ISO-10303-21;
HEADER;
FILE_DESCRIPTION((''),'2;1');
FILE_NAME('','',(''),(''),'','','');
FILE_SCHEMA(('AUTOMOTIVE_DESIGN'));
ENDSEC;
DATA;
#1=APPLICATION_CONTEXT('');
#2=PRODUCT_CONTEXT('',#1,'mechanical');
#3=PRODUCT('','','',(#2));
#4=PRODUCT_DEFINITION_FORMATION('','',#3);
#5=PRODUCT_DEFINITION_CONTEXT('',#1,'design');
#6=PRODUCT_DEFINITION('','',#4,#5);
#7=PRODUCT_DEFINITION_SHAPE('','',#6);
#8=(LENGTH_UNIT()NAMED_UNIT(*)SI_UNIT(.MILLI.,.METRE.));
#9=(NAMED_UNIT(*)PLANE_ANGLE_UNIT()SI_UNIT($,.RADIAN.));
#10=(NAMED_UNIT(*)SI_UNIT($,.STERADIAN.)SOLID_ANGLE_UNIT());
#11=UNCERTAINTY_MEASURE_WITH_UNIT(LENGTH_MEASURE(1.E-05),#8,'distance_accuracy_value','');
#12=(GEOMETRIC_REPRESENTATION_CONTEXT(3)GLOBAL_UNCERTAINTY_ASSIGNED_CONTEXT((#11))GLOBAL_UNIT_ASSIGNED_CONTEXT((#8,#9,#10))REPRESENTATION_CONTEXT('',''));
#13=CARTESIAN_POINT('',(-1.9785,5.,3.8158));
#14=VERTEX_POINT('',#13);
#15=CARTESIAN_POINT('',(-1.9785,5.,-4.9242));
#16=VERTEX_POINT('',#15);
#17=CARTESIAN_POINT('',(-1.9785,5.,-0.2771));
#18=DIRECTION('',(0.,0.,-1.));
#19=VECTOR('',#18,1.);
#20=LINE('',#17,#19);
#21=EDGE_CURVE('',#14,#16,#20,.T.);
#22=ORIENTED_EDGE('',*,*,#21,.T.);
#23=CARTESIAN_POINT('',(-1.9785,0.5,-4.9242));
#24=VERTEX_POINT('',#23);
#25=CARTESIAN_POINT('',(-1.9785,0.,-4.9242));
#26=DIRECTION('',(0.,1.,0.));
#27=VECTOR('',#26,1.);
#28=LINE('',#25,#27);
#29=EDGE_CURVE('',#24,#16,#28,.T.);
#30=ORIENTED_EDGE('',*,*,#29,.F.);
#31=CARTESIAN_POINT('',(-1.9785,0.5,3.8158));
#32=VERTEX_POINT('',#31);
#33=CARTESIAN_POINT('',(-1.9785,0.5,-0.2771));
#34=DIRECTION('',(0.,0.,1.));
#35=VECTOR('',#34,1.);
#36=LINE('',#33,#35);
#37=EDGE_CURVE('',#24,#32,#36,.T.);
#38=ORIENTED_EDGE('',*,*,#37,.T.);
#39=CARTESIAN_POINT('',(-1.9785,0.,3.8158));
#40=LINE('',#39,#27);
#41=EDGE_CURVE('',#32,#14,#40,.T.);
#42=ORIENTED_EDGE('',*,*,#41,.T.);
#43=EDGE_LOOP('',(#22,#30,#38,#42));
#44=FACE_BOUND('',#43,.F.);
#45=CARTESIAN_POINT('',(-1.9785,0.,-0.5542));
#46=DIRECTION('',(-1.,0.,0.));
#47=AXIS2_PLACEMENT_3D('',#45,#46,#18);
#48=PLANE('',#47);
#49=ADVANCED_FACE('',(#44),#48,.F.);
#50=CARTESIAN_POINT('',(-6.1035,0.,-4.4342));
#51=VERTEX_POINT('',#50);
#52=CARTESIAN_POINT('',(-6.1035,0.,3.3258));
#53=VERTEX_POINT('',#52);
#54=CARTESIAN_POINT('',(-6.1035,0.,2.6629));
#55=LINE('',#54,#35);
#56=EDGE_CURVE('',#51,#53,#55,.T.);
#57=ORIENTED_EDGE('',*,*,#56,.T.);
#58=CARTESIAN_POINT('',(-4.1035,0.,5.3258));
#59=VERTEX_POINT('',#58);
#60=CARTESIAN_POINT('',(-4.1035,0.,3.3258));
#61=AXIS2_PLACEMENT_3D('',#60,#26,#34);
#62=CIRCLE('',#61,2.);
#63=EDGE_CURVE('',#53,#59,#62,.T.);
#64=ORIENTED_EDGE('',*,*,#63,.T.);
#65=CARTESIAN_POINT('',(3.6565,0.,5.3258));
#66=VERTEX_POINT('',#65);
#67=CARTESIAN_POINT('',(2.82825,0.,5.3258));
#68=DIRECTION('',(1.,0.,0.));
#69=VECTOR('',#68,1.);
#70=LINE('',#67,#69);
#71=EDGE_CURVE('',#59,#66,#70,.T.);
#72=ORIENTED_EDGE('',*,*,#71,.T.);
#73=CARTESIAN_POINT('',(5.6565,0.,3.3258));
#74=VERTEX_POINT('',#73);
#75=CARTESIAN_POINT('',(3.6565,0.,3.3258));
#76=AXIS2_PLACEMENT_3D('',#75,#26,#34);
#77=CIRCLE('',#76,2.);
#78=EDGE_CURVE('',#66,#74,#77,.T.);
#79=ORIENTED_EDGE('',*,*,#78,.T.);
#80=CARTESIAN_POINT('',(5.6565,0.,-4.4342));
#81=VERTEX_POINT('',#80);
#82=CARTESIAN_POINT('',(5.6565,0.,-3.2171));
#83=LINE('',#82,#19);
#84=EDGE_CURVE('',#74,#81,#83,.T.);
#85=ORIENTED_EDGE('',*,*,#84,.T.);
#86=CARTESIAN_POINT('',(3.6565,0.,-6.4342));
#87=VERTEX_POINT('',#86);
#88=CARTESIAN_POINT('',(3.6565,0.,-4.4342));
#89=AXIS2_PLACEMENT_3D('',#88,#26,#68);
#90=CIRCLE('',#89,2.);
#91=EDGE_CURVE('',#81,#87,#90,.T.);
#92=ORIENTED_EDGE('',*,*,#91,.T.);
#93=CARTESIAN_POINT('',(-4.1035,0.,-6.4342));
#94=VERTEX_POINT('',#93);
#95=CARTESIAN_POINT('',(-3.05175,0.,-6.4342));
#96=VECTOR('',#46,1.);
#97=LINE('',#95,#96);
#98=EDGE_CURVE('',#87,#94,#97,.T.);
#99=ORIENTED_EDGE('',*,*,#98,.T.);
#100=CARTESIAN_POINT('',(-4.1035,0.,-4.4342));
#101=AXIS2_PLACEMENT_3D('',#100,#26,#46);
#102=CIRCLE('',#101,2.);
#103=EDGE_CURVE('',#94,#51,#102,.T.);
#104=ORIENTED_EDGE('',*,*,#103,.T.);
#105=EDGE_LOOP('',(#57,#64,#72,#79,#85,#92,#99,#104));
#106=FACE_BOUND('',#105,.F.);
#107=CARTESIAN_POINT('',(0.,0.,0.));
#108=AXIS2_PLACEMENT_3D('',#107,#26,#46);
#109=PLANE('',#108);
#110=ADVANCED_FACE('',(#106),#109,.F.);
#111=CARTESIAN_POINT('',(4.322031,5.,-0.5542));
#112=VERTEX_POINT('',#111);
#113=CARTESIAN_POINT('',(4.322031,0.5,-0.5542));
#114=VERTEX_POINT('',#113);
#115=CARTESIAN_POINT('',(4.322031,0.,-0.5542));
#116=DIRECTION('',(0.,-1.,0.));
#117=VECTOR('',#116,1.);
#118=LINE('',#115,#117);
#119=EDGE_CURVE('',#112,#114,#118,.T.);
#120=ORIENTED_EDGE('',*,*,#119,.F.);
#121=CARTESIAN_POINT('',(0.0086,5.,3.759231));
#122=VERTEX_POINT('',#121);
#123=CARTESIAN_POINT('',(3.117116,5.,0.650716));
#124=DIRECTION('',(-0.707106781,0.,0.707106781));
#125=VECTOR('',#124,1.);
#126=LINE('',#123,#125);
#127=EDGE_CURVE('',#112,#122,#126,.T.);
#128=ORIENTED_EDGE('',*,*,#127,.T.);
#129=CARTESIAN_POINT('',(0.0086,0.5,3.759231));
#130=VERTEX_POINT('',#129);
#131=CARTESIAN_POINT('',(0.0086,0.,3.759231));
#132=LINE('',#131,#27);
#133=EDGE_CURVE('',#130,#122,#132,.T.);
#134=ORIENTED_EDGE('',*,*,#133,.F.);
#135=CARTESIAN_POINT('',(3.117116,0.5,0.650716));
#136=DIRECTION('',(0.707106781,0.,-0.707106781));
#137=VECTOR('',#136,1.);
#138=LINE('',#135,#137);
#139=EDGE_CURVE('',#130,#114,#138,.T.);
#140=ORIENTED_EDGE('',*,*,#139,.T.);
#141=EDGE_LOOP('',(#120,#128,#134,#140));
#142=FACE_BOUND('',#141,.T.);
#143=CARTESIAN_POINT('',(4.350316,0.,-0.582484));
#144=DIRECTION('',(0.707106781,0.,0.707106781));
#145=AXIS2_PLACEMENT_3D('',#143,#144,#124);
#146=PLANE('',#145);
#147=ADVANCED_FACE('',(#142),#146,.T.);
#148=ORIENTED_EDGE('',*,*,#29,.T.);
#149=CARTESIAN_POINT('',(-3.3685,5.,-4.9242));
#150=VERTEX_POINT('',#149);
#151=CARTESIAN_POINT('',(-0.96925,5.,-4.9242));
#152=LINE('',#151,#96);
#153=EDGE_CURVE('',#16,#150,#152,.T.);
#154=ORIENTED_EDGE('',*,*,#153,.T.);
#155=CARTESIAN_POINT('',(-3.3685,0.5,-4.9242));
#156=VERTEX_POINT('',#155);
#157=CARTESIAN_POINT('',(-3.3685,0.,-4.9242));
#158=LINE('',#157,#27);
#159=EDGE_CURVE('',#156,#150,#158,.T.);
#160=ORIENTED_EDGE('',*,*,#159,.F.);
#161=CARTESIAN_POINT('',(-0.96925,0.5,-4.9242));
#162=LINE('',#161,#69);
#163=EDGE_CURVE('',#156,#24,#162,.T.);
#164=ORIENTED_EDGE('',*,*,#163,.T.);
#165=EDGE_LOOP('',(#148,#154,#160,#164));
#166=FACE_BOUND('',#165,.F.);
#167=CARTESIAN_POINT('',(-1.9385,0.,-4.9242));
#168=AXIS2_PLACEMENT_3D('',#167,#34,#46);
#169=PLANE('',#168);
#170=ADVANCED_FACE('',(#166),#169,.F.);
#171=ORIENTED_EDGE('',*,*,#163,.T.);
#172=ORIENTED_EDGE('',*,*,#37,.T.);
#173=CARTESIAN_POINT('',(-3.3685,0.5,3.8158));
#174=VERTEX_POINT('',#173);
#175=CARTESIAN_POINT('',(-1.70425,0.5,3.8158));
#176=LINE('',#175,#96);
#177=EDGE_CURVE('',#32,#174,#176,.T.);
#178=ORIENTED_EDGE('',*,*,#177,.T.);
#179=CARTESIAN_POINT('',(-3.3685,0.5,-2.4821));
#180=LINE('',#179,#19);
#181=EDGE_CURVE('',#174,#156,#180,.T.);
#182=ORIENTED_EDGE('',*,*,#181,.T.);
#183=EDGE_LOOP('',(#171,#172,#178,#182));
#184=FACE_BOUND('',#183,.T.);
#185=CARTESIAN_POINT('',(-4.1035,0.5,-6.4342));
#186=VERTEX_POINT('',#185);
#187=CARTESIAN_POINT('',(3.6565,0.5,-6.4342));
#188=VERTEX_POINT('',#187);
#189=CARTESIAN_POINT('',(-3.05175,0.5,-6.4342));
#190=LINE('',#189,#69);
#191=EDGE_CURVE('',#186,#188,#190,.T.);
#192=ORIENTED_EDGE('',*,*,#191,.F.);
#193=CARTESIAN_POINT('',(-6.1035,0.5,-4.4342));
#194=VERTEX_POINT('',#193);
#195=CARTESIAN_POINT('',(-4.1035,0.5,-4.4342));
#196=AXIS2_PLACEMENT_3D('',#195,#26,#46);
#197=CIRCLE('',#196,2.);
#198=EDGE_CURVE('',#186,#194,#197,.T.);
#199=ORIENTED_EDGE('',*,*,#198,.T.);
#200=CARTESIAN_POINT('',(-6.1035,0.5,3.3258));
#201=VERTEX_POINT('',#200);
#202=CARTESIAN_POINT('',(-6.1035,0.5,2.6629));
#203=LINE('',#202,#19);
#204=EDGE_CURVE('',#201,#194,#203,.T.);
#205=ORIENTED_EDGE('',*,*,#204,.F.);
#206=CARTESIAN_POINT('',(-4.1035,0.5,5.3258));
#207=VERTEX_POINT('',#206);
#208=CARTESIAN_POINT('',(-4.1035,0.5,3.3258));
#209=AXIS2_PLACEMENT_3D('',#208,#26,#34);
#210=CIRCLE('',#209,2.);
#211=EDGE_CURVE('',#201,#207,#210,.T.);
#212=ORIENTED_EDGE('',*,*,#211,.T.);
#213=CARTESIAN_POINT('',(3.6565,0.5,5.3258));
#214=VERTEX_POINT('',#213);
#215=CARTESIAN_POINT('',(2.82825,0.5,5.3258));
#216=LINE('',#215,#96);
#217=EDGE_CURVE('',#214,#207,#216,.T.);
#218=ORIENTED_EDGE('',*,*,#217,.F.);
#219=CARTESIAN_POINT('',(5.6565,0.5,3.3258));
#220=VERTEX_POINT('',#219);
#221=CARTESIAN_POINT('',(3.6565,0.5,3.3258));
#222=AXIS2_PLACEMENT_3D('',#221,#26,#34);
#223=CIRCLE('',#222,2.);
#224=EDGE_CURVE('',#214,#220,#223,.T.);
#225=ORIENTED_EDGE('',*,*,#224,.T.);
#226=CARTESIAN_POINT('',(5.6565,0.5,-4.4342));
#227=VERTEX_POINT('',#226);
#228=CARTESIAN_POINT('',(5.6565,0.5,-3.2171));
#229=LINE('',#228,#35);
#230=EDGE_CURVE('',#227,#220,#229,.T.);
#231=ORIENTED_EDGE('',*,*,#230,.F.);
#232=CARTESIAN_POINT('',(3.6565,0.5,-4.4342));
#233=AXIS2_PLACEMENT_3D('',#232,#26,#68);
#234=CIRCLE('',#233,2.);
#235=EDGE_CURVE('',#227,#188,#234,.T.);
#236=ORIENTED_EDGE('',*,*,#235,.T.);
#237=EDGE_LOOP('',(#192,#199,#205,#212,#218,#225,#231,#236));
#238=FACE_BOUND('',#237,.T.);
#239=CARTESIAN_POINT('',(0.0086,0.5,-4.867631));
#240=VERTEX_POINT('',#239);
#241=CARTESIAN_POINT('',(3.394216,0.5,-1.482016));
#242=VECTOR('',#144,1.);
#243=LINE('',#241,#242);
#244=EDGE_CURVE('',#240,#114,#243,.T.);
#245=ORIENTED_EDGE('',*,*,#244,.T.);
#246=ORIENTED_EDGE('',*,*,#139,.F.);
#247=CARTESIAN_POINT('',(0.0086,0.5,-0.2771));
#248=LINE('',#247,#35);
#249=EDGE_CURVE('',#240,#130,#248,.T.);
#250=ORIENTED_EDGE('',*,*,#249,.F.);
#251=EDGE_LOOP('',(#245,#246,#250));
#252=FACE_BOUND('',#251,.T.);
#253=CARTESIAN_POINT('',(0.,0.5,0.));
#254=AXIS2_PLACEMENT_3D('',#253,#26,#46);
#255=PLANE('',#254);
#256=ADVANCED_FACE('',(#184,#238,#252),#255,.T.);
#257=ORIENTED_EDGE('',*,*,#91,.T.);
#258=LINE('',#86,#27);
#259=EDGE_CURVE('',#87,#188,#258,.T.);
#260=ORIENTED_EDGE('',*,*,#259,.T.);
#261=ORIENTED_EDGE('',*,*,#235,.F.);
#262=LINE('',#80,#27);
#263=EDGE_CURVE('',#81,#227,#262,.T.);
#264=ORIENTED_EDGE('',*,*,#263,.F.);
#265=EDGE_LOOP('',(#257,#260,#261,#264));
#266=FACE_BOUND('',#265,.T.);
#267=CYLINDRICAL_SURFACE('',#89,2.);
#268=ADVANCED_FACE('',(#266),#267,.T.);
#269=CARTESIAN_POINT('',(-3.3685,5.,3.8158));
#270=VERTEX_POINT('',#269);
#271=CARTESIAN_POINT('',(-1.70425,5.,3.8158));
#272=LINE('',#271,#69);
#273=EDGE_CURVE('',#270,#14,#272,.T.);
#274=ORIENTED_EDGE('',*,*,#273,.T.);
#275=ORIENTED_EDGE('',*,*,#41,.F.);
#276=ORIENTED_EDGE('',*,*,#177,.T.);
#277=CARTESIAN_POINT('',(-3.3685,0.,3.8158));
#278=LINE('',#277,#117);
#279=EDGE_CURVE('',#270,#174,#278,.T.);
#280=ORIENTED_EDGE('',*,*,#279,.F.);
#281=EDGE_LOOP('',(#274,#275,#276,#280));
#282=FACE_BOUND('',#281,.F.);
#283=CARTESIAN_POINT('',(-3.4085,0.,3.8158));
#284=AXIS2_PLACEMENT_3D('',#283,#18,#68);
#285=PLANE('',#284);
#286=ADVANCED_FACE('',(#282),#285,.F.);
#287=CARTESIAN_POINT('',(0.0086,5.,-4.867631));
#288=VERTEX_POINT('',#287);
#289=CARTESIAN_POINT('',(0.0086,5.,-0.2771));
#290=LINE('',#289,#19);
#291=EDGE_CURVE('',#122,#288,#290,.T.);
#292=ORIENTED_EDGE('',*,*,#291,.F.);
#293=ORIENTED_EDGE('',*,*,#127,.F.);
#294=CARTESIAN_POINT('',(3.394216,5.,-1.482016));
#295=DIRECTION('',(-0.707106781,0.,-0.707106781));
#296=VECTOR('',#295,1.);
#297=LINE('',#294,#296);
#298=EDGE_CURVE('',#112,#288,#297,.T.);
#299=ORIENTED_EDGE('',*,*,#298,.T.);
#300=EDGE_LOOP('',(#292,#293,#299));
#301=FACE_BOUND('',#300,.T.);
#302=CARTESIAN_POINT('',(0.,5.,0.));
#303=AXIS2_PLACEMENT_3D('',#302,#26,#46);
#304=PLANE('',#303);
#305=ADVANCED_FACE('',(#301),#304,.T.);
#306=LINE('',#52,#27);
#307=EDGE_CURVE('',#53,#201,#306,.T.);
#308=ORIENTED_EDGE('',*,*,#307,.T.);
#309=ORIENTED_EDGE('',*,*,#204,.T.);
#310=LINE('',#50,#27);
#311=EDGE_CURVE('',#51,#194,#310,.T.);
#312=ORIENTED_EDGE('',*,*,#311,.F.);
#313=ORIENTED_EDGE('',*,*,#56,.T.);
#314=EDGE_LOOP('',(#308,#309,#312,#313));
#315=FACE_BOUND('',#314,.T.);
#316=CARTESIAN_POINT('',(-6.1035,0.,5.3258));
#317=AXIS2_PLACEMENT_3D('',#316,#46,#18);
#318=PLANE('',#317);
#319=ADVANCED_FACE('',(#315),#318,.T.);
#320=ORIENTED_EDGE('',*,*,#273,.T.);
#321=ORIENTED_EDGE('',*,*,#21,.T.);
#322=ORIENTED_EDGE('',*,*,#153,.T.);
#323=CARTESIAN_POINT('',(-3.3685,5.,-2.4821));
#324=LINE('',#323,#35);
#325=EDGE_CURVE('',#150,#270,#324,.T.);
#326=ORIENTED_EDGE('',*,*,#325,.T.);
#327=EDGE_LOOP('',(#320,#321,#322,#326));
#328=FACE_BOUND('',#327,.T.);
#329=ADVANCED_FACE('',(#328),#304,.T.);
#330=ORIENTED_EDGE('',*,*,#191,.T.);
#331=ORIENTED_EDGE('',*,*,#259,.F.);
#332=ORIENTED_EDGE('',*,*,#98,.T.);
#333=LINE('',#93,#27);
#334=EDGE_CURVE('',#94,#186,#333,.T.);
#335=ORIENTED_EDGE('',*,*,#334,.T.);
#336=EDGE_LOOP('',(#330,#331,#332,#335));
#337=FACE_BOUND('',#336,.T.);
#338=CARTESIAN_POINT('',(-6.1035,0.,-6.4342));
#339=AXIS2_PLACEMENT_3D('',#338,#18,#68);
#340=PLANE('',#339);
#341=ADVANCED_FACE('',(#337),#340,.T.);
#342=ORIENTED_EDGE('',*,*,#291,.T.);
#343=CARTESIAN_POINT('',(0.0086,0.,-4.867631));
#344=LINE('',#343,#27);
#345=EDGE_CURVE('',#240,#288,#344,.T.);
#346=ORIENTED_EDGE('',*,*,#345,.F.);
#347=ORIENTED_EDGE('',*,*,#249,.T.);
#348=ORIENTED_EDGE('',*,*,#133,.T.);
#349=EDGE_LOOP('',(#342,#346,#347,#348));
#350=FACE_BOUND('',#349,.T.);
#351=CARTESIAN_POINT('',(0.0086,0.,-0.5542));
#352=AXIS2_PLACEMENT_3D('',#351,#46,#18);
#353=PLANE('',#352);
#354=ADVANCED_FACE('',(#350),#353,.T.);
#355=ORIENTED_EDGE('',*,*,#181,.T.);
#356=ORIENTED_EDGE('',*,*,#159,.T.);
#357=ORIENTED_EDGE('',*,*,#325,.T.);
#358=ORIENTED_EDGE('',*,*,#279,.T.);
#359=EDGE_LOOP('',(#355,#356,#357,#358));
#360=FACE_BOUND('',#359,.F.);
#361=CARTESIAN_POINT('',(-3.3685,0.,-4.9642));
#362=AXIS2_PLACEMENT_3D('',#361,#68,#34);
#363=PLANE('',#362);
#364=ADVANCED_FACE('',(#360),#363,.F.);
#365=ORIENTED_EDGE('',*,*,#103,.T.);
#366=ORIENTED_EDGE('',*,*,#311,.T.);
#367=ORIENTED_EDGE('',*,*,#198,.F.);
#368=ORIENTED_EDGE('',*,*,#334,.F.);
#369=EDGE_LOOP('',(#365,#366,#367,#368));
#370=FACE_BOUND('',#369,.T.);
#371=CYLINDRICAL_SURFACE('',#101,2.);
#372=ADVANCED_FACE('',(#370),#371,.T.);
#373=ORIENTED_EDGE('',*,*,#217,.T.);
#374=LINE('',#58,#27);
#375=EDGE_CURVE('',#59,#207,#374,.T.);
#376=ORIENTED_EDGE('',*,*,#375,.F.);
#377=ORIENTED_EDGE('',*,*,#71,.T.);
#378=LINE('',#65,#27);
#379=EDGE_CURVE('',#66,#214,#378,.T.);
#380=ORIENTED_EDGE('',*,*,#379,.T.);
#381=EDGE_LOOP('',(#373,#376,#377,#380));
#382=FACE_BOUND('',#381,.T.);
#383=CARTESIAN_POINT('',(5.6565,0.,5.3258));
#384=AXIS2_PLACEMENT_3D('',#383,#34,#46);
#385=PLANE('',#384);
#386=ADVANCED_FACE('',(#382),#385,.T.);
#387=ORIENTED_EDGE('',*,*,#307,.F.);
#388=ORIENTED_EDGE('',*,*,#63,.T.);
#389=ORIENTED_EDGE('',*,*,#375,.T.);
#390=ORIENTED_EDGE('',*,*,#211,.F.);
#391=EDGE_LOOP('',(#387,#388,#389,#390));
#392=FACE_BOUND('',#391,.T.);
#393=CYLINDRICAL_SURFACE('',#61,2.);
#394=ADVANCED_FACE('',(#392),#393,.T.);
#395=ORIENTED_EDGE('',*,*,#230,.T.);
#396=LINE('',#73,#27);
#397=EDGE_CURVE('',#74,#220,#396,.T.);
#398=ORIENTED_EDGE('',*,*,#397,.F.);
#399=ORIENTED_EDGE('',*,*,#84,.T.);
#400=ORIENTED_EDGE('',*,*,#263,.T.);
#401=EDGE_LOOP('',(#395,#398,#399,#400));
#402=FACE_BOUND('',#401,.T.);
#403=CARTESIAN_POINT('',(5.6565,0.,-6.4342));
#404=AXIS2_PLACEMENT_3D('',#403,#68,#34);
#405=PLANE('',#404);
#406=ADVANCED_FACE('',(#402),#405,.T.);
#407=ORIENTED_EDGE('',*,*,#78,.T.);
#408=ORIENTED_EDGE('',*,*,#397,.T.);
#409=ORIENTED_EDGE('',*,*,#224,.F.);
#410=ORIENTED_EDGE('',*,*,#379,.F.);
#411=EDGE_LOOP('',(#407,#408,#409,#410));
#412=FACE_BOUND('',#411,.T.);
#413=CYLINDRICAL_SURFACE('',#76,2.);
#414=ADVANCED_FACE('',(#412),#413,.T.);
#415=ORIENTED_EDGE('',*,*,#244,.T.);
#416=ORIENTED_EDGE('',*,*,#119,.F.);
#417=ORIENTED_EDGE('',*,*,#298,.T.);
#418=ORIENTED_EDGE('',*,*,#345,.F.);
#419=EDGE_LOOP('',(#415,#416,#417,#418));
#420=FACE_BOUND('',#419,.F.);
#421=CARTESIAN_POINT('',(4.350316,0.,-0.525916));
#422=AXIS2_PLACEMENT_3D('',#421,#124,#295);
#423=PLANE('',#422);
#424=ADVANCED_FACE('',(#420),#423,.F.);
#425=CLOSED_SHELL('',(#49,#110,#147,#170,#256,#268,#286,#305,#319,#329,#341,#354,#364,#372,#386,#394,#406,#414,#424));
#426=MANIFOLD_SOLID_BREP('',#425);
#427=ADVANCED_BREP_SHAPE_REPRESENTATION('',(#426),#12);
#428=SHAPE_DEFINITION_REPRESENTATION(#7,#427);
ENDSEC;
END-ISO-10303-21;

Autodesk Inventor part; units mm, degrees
ref_plane "YZ Plane" through (0, 0, 0) normal (1, 0, 0) x (0, 1, 0)
ref_plane "XZ Plane" through (0, 0, 0) normal (0, 1, 0) x (-1, 0, 0)
ref_plane "XY Plane" through (0, 0, 0) normal (0, 0, 1) x (1, 0, 0)
sketch "Szkic1" plane through (0, 0, 0) normal (0, 1, 0) x (-1, 0, 0)
  line L0 (5.1235, 4.3458) -> (-4.6765, 4.3458)
  line L1 (-4.6765, 4.3458) -> (-4.6765, -5.4542)
  line L2 (-4.6765, -5.4542) -> (5.1235, -5.4542)
  line L3 (5.1235, -5.4542) -> (5.1235, 4.3458)
  line L4 (5.1235, 4.3458) -> (-4.6765, -5.4542) construction
  line L5 (-4.6765, 4.3458) -> (5.1235, -5.4542) construction
  line L6 (0.2235, -0.5542) -> (2.6735, -0.5542)
  line L7 (3.4085, 3.8558) -> (1.9385, 3.8558)
  line L8 (1.9385, 3.8558) -> (1.9385, -4.9642)
  line L9 (1.9385, -4.9642) -> (3.4085, -4.9642)
  line L10 (3.4085, -4.9642) -> (3.4085, 3.8558)
  line L11 (3.4085, 3.8558) -> (1.9385, -4.9642) construction
  line L12 (1.9385, 3.8558) -> (3.4085, -4.9642) construction
  line L13 (0.2235, -0.5542) -> (0.0314, -0.5542)
  line L14 (0.0314, -0.5542) -> (0.0314, -4.9642)
  line L15 (0.0314, -0.5542) -> (-4.3786, -0.5542)
  line L16 (-4.3786, -0.5542) -> (0.0314, -4.9642)
  line L17 (-4.3786, -0.5542) -> (0.0314, 3.8558)
  line L18 (0.0314, -0.5542) -> (0.0314, 3.8558)
  line L19 (-5.6565, 5.3258) -> (6.1035, 5.3258)
  line L20 (6.1035, 5.3258) -> (6.1035, -6.4342)
  line L21 (6.1035, -6.4342) -> (-5.6565, -6.4342)
  line L22 (-5.6565, -6.4342) -> (-5.6565, 5.3258)
  line L23 (-5.6565, 5.3258) -> (6.1035, -6.4342) construction
  line L24 (6.1035, 5.3258) -> (-5.6565, -6.4342) construction
  point P0 (0, 0)
  dimension "d0" = 9.8
  dimension "d1" = 9.8
  dimension "d2" = 2.45
  dimension "d3" = 1.47
  dimension "d4" = 8.82
  dimension "d5" = 0.1921
  dimension "d6" = 4.41
  dimension "d7" = 4.41
  dimension "d8" = 11.76
  dimension "d9" = 11.76
extrude "Wyciągnięcie proste1" add sketch "Szkic1" along normal blind 0.5 contours L3 L2 L1 L0 | L10 L9 L8 L7 | L14 L16 L15 | L15 L17 L18 | L19 L20 L21 L22
extrude "Wyciągnięcie proste2" add sketch "Szkic1" along normal blind 5 contours L10 L9 L8 L7 | L14 L16 L15 | L15 L17 L18
fillet "Zaokrąglenie1" radius 2 4 edges at (5.6565, 0.25, 5.3258) (-6.1035, 0.25, 5.3258) (5.6565, 0.25, -6.4342) (-6.1035, 0.25, -6.4342)
offset faces "Rozmiar1" outward -0.04 faces at (-1.9385, 2, 0.9158) (-2.4285, 2, -4.9642) (-3.4085, 2, -2.0242) (-2.9185, 2, 3.8558) (-0.0314, 2, -2.0242) (1.4386, 2, 2.3858) (2.9086, 2, -2.0242)
properties part number "guzik_stop"
